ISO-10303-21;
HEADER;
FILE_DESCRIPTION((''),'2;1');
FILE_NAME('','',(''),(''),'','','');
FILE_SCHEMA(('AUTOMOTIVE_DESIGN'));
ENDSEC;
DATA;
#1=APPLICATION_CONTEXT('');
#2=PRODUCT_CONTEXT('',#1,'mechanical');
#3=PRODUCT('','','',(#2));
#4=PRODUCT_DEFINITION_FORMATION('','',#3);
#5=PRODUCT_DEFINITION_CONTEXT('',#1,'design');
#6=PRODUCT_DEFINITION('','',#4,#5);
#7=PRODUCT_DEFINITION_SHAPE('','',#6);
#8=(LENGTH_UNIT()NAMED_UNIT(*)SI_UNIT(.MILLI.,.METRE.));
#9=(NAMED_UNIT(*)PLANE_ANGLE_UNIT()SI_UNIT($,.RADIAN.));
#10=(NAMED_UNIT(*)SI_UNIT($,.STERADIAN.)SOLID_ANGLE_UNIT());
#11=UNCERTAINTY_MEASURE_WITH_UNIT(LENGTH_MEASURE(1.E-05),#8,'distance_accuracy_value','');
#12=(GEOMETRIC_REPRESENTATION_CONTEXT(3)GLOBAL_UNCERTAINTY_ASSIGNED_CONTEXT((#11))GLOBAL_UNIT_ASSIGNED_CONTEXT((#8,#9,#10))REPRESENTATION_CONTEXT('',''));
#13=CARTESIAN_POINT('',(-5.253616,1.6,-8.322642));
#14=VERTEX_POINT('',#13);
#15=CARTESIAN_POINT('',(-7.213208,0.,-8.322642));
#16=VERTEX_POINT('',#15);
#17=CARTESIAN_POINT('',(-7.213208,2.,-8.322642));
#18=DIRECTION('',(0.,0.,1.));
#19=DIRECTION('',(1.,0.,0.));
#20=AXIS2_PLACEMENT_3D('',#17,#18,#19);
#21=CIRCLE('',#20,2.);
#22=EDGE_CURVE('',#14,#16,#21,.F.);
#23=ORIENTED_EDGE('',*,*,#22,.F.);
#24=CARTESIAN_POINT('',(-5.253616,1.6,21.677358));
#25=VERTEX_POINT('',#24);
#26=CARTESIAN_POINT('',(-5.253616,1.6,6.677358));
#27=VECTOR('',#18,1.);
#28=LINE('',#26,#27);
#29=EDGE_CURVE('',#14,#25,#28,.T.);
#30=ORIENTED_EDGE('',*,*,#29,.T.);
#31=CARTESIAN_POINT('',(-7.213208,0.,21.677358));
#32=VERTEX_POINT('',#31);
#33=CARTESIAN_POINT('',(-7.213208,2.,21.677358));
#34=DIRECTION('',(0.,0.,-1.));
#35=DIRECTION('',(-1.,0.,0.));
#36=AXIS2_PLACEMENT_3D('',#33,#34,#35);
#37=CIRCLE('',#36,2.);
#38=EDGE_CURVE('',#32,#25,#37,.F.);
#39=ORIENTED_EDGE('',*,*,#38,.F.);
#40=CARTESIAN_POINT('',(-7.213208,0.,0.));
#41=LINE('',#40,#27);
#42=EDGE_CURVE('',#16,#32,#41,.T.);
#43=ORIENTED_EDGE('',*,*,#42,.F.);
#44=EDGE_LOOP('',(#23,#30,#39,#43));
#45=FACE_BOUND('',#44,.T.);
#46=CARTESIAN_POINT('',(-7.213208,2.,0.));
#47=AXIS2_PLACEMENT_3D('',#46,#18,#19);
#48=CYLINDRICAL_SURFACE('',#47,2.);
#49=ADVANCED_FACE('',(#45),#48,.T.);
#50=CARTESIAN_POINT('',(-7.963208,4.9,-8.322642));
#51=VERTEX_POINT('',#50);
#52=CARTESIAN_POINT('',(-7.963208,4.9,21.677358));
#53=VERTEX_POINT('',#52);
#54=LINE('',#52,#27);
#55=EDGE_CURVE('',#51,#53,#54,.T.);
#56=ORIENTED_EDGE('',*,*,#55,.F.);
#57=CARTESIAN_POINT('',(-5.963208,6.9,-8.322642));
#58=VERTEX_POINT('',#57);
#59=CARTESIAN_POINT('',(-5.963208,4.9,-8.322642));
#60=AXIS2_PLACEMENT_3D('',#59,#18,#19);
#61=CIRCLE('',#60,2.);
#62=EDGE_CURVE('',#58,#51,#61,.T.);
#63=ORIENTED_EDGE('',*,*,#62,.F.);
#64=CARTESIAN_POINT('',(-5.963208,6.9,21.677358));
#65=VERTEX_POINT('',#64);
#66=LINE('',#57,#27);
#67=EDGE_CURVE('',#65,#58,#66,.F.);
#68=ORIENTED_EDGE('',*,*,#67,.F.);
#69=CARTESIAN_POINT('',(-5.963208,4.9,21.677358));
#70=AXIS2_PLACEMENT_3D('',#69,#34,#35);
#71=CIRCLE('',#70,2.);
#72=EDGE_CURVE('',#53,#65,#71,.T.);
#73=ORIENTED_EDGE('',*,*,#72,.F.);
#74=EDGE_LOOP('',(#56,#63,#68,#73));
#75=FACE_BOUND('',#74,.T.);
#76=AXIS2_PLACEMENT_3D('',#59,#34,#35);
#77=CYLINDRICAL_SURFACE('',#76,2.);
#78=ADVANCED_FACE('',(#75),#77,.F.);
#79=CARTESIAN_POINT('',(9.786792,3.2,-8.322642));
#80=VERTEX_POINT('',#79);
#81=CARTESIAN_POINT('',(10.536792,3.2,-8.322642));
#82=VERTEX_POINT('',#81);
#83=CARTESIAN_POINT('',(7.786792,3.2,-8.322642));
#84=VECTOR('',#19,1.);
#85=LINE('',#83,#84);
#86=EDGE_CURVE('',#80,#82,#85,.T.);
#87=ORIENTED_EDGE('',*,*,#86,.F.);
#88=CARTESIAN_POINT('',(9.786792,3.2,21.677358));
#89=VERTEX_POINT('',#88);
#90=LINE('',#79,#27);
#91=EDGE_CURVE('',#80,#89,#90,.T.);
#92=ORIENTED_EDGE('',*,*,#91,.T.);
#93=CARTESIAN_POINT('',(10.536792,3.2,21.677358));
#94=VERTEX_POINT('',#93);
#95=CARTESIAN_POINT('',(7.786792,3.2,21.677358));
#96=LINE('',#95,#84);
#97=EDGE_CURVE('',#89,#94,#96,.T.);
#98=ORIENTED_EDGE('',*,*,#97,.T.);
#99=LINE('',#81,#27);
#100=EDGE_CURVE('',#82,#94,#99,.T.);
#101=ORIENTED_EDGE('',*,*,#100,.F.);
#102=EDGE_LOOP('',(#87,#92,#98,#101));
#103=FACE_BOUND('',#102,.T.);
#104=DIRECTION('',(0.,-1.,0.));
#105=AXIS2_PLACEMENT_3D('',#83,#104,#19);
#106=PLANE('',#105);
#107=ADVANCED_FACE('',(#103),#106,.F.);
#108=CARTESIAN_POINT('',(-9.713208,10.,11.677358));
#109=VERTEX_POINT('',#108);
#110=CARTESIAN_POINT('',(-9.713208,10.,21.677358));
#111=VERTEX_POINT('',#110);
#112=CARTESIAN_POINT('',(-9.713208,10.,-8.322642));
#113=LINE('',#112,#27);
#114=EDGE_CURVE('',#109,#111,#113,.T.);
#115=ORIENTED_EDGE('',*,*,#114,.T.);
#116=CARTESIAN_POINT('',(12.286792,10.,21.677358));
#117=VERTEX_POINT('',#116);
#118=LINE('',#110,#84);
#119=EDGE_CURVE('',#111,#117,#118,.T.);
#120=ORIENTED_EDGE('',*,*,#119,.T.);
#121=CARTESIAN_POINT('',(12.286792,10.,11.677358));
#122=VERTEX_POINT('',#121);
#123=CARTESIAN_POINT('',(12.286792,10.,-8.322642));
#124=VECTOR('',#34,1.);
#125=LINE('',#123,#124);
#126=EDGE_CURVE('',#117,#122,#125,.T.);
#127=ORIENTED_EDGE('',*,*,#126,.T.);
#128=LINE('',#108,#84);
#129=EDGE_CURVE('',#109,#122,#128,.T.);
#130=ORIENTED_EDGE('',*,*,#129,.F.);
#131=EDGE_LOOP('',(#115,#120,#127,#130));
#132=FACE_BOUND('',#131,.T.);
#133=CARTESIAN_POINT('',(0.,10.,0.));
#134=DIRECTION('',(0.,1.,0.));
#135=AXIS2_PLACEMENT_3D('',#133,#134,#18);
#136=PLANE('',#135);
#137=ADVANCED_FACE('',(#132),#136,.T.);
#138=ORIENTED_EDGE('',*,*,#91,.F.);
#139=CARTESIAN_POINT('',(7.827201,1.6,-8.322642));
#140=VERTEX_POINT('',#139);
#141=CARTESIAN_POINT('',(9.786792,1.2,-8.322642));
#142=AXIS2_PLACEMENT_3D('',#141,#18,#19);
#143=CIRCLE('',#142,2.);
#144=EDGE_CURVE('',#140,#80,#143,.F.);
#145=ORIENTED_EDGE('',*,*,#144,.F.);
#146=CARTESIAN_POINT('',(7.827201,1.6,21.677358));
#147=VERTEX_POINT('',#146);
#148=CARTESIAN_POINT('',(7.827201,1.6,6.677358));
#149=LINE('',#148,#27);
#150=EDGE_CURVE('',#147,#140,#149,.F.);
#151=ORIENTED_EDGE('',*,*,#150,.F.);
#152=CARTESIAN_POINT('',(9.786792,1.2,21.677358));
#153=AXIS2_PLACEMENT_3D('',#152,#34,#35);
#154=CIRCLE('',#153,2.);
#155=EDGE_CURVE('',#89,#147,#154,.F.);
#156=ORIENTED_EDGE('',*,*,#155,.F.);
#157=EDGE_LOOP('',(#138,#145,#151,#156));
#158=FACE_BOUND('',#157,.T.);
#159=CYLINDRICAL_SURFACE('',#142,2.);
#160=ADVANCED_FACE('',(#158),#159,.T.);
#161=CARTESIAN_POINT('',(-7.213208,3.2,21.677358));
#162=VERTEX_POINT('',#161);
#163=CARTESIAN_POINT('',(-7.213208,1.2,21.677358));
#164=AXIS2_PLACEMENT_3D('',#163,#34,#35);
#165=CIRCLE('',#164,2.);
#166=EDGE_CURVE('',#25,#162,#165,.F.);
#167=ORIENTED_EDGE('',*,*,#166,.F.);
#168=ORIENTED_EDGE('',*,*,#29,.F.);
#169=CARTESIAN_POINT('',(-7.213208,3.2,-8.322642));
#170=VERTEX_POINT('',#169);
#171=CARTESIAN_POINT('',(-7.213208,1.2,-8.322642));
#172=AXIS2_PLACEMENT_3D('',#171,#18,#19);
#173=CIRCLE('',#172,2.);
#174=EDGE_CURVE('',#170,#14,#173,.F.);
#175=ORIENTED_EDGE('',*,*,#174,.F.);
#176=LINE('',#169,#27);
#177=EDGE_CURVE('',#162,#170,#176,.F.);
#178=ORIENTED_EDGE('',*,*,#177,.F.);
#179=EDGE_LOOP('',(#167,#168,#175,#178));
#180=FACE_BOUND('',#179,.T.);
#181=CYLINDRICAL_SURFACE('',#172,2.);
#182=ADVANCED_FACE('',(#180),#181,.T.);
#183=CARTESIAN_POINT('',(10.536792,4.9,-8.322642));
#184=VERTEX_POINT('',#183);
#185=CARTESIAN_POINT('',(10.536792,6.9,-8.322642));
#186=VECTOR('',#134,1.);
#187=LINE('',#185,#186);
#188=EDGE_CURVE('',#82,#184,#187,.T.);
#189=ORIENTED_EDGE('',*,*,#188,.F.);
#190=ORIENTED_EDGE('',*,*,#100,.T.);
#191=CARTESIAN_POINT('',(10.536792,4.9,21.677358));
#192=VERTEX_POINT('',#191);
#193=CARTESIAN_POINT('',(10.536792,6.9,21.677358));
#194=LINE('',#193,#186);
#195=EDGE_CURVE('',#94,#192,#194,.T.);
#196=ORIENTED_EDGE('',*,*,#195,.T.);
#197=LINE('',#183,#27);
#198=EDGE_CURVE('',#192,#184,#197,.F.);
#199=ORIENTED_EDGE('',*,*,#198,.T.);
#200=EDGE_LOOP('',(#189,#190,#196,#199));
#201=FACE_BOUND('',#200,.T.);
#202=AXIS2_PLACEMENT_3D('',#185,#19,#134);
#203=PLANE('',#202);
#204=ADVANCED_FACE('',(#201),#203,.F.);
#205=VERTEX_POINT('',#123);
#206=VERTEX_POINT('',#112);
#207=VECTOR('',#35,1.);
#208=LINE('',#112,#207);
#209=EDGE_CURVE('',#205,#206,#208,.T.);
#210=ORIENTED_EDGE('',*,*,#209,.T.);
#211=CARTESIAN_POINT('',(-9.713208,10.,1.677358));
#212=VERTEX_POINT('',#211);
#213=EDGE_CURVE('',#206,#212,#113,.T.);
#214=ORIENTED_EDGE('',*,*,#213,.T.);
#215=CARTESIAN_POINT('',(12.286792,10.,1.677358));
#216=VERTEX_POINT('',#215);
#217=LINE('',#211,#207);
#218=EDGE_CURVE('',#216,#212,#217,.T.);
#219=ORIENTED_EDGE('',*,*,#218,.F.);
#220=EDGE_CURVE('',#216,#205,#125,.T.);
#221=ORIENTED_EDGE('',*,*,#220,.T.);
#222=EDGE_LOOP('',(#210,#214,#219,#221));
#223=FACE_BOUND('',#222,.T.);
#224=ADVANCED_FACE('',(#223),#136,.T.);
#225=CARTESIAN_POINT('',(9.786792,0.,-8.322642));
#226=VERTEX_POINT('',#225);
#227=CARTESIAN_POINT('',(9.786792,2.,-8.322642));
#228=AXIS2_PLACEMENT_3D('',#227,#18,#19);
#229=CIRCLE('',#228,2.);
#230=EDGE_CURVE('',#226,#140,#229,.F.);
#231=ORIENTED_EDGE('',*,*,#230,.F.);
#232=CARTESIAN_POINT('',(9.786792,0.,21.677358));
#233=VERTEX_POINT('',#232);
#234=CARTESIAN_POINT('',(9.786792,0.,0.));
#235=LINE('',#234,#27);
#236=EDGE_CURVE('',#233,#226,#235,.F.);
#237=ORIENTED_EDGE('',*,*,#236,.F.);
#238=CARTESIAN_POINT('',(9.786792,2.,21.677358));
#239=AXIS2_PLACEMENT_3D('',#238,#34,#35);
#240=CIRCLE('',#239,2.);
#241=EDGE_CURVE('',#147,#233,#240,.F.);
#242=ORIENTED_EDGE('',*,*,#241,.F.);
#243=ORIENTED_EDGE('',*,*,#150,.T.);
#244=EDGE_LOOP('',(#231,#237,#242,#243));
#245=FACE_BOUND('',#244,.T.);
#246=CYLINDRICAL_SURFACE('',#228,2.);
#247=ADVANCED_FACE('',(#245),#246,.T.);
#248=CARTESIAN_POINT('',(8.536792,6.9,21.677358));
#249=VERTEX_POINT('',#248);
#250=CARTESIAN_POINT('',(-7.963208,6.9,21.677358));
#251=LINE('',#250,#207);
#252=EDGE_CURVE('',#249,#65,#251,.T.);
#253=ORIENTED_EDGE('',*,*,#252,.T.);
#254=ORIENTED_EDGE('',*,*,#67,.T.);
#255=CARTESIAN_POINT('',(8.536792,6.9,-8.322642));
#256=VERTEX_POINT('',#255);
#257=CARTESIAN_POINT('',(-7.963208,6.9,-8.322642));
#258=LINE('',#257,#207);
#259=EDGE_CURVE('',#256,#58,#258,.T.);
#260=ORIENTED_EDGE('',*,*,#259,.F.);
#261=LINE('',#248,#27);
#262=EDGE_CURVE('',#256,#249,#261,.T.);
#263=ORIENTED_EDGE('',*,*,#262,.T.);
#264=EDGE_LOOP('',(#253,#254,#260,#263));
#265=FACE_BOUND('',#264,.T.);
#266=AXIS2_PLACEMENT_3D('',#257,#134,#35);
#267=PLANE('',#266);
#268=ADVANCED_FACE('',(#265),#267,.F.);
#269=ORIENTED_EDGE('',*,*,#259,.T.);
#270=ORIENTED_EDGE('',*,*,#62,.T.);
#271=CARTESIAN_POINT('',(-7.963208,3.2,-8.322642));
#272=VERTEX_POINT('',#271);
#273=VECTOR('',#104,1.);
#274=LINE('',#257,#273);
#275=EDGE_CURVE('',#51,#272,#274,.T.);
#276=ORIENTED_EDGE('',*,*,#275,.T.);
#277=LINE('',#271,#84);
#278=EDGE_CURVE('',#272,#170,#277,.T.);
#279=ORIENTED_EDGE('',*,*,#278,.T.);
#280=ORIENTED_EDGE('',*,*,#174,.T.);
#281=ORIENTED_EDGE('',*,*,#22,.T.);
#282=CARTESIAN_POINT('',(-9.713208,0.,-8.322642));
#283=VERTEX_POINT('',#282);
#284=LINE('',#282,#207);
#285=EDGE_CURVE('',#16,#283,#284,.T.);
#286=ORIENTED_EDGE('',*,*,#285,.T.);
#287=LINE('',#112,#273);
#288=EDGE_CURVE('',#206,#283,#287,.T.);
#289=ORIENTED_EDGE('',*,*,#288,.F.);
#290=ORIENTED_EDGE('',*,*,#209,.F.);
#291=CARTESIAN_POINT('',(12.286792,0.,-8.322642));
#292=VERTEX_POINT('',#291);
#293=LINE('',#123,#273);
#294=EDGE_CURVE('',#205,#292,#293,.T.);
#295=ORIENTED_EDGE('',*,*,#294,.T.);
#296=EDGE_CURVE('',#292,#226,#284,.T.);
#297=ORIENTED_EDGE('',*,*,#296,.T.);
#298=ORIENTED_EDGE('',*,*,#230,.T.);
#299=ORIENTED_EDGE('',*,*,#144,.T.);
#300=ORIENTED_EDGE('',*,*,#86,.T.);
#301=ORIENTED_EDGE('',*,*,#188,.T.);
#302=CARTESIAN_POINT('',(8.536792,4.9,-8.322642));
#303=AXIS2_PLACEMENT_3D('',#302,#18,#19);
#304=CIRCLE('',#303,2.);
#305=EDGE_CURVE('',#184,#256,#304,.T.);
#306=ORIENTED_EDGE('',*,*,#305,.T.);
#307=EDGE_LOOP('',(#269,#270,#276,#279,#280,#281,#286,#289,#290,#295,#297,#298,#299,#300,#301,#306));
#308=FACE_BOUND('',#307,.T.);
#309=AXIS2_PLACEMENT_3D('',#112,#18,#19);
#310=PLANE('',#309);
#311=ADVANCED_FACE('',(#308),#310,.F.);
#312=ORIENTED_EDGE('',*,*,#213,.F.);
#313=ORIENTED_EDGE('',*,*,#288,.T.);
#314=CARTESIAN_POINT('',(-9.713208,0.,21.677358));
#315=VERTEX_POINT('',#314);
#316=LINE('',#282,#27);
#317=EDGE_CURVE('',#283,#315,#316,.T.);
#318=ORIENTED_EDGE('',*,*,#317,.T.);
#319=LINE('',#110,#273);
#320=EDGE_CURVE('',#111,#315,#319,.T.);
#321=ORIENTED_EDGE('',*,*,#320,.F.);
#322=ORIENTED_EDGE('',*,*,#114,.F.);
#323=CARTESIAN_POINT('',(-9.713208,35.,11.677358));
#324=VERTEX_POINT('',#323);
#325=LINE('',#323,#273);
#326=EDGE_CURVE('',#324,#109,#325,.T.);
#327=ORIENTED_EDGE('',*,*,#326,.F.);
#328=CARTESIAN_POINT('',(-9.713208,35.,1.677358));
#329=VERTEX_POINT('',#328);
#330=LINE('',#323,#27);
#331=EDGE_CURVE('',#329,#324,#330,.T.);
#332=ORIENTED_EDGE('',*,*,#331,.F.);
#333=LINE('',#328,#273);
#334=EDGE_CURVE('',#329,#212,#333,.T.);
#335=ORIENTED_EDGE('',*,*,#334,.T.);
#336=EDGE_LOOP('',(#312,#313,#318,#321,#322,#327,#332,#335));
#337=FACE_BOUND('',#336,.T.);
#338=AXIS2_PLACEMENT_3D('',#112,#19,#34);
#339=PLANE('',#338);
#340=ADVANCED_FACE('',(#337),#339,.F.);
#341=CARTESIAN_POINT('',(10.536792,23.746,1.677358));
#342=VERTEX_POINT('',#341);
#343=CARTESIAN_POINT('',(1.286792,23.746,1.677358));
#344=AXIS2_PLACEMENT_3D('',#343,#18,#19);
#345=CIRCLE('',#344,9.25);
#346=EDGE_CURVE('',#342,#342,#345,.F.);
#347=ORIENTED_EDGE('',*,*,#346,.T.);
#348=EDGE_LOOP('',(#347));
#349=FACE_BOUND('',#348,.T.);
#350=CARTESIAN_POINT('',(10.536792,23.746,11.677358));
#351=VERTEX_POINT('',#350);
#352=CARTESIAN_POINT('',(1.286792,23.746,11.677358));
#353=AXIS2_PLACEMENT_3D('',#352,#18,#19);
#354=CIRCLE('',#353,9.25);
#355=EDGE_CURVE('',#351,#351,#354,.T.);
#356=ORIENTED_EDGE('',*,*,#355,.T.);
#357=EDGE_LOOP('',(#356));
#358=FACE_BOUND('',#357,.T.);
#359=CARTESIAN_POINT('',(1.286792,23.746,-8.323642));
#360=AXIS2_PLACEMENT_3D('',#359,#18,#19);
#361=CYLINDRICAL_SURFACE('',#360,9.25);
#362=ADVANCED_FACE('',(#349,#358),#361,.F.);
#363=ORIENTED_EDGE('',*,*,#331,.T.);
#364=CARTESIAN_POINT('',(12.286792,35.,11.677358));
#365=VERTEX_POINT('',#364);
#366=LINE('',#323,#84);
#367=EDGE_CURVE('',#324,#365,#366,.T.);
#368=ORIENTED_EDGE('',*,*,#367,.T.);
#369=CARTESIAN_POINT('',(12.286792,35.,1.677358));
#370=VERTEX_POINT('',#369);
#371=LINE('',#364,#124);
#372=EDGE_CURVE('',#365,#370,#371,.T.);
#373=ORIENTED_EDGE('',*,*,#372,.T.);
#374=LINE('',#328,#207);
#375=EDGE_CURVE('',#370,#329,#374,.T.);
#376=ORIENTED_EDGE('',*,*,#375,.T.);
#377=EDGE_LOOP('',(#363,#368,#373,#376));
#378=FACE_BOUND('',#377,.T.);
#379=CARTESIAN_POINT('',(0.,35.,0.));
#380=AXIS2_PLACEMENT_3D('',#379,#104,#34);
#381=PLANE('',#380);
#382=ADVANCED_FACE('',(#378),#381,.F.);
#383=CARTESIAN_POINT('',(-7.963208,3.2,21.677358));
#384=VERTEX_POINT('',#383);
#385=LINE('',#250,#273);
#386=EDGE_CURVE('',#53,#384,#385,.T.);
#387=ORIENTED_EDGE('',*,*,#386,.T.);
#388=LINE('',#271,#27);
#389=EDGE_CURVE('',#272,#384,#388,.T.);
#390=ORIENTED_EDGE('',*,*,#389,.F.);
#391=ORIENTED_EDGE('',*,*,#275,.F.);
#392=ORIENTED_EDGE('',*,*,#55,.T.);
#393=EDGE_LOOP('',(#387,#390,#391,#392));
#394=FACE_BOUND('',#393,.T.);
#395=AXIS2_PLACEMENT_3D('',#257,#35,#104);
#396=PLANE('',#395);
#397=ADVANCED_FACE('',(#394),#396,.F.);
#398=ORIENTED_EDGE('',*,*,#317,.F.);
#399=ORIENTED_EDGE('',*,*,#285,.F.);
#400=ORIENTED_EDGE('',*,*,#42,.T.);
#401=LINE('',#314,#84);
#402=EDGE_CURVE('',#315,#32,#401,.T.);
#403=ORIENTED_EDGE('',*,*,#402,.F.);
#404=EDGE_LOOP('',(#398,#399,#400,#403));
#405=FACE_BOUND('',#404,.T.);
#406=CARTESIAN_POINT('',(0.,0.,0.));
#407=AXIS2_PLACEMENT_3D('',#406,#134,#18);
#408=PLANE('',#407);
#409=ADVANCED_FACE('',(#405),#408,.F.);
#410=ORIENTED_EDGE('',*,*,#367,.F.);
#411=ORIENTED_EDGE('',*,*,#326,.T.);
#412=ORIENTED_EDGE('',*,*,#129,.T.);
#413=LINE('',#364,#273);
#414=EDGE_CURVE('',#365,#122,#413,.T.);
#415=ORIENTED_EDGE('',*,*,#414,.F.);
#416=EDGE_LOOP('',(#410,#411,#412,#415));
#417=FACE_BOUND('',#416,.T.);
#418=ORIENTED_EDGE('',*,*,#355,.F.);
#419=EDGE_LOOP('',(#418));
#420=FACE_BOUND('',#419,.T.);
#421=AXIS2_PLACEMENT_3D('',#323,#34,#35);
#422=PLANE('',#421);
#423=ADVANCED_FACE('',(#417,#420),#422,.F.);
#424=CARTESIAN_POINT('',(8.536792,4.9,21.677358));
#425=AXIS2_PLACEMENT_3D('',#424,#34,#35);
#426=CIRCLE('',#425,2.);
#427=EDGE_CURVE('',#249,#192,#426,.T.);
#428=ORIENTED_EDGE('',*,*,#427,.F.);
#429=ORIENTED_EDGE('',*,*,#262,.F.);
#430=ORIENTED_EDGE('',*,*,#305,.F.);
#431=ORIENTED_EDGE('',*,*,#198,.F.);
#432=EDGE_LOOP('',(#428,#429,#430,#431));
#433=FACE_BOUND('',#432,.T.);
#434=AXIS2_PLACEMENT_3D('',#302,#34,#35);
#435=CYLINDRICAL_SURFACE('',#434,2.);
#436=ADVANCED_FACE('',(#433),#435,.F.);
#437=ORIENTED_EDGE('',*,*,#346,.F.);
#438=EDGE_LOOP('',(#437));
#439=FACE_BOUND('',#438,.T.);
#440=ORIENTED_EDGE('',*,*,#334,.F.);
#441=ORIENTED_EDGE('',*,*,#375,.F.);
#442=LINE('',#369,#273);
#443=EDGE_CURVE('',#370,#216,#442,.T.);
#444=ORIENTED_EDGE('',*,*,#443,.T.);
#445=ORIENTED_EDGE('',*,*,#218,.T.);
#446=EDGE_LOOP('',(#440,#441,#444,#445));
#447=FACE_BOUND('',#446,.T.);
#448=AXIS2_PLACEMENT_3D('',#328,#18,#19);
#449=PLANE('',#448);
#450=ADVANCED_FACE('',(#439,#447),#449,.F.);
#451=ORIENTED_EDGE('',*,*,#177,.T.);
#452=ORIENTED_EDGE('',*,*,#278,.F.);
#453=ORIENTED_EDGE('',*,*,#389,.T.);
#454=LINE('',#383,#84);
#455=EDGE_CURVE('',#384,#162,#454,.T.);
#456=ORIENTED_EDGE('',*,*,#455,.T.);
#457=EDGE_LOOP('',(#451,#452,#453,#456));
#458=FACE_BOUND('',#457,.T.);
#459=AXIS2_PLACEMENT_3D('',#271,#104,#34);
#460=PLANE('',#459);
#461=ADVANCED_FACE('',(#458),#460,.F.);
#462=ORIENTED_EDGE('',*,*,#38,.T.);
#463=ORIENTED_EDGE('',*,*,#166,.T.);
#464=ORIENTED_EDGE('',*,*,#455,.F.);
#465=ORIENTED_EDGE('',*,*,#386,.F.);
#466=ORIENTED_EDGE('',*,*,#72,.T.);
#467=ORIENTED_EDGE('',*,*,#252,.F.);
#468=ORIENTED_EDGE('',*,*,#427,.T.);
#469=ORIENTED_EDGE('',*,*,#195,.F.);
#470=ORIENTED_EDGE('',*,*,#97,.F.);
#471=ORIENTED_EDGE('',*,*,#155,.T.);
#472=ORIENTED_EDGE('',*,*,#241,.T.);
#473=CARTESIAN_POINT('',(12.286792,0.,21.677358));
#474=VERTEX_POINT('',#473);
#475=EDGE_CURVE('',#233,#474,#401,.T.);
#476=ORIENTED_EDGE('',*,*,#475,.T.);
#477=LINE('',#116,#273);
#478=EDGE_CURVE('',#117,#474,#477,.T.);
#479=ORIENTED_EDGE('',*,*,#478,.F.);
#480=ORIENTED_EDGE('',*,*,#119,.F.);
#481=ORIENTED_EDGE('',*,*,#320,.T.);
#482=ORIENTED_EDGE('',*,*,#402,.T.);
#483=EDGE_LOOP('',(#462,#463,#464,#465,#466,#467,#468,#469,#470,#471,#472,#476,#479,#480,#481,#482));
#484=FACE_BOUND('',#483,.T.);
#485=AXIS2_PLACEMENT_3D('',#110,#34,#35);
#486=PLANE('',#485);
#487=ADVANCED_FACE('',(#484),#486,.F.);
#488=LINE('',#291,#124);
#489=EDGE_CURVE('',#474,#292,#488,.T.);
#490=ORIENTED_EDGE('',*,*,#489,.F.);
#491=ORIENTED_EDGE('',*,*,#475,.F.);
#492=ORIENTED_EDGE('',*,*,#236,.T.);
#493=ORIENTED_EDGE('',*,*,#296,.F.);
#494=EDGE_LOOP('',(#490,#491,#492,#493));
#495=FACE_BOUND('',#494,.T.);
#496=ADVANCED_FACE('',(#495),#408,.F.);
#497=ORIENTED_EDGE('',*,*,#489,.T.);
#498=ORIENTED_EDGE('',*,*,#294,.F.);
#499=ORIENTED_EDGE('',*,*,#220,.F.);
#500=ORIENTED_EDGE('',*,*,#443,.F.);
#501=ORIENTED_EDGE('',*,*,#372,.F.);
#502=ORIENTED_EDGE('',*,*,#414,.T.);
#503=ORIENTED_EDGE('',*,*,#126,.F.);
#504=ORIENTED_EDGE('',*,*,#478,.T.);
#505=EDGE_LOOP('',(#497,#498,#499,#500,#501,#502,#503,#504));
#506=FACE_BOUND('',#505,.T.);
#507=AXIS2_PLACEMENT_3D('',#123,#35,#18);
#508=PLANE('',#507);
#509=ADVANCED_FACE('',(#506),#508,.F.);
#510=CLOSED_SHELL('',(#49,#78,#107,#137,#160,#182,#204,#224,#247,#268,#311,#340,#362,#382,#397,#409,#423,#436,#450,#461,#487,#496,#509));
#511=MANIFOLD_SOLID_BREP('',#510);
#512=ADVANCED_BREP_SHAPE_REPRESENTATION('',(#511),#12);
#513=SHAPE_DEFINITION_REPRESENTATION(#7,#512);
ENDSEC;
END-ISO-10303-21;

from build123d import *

# Parameters (mm, degrees)
SKETCH1_W           = 22
SKETCH1_H           = 30
BOSS_EXTRUDE1_DEPTH = 10
CUT_EXTRUDE1_DEPTH  = 34.925879042
FILLET1_R           = 2
SKETCH4_W           = 22
SKETCH4_H           = 10
BOSS_EXTRUDE2_DEPTH = 25
CUT_EXTRUDE2_REACH  = 44.142
SKETCH5_R           = 9.25


with BuildPart() as part:
    # Sketch1 → Boss-Extrude1 (new body)
    with BuildSketch(Plane(origin=(0, 0, 0), x_dir=(1, 0, 0), z_dir=(0, 1, 0))):
        with Locations((1.286792453, -6.677358491)):
            Rectangle(SKETCH1_W, SKETCH1_H)
    extrude(amount=BOSS_EXTRUDE1_DEPTH)

    # Sketch2 → Cut-Extrude1 (cut, through all)
    with BuildSketch(Plane.XY.offset(21.677358491)):
        Polygon((-7.963207547, 6.9), (10.536792453, 6.9), (10.536792453, 3.2), (7.786792453, 3.2), (7.786792453, 0), (-5.213207547, 0), (-5.213207547, 3.2), (-7.963207547, 3.2), align=None)
    extrude(amount=-CUT_EXTRUDE1_DEPTH, mode=Mode.SUBTRACT)

    # Fillet1
    # the kernel refuses this fillet: 2 mm, written as the material it adds along each edge
    with BuildSketch(Plane(origin=(10.536792453, 6.9, 21.677358491), x_dir=(-1, 0, 0), z_dir=(0, 0, -1)), Plane(origin=(-7.963207547, 6.9, 21.677358491), x_dir=(0, -1, 0), z_dir=(0, 0, -1))) as fillet1_piece_1:
        with BuildLine():
            CenterArc((FILLET1_R, -FILLET1_R), FILLET1_R, 90, 90)
            Line((0, -FILLET1_R), (0, 0))
            Line((0, 0), (FILLET1_R, 0))
        make_face()
    extrude(amount=30)
    # the kernel refuses this fillet: 2 mm, written as the material it takes off along each edge
    with BuildSketch(Plane(origin=(-5.213207547, 0, 26.677358491), x_dir=(-1, 0, 0), z_dir=(0, 0, -1)), Plane(origin=(7.786792453, 0, 26.677358491), x_dir=(0, 1, 0), z_dir=(0, 0, -1)), Plane(origin=(7.786792453, 3.2, 26.677358491), x_dir=(1, 0, 0), z_dir=(0, 0, -1)), Plane(origin=(-5.213207547, 3.2, 26.677358491), x_dir=(0, -1, 0), z_dir=(0, 0, -1))) as fillet1_2_piece_1:
        with BuildLine():
            CenterArc((FILLET1_R, FILLET1_R), FILLET1_R, 180, 90)
            Line((0, FILLET1_R), (0, 0))
            Line((0, 0), (FILLET1_R, 0))
        make_face()
    extrude(amount=40, mode=Mode.SUBTRACT)

    # Sketch4 → Boss-Extrude2 (add)
    with BuildSketch(Plane(origin=(0, 10, 0), x_dir=(1, 0, 0), z_dir=(0, 1, 0))):
        with Locations((1.286792453, -6.677358491)):
            Rectangle(SKETCH4_W, SKETCH4_H)
    extrude(amount=BOSS_EXTRUDE2_DEPTH)

    # Sketch5 → Cut-Extrude2 (cut, up to next)
    with BuildSketch(Plane.XY.offset(11.677358491), mode=Mode.PRIVATE) as cut_extrude2_sk1:
        with Locations((1.286792453, 23.746)):
            Circle(SKETCH5_R)
    cut_extrude2_tool1 = extrude(cut_extrude2_sk1.sketch, amount=-CUT_EXTRUDE2_REACH, mode=Mode.PRIVATE) & part.part
    add(cut_extrude2_tool1.solids().sort_by_distance((1.286792, 23.746, 11.677358))[0], mode=Mode.SUBTRACT)


solid = part.part
